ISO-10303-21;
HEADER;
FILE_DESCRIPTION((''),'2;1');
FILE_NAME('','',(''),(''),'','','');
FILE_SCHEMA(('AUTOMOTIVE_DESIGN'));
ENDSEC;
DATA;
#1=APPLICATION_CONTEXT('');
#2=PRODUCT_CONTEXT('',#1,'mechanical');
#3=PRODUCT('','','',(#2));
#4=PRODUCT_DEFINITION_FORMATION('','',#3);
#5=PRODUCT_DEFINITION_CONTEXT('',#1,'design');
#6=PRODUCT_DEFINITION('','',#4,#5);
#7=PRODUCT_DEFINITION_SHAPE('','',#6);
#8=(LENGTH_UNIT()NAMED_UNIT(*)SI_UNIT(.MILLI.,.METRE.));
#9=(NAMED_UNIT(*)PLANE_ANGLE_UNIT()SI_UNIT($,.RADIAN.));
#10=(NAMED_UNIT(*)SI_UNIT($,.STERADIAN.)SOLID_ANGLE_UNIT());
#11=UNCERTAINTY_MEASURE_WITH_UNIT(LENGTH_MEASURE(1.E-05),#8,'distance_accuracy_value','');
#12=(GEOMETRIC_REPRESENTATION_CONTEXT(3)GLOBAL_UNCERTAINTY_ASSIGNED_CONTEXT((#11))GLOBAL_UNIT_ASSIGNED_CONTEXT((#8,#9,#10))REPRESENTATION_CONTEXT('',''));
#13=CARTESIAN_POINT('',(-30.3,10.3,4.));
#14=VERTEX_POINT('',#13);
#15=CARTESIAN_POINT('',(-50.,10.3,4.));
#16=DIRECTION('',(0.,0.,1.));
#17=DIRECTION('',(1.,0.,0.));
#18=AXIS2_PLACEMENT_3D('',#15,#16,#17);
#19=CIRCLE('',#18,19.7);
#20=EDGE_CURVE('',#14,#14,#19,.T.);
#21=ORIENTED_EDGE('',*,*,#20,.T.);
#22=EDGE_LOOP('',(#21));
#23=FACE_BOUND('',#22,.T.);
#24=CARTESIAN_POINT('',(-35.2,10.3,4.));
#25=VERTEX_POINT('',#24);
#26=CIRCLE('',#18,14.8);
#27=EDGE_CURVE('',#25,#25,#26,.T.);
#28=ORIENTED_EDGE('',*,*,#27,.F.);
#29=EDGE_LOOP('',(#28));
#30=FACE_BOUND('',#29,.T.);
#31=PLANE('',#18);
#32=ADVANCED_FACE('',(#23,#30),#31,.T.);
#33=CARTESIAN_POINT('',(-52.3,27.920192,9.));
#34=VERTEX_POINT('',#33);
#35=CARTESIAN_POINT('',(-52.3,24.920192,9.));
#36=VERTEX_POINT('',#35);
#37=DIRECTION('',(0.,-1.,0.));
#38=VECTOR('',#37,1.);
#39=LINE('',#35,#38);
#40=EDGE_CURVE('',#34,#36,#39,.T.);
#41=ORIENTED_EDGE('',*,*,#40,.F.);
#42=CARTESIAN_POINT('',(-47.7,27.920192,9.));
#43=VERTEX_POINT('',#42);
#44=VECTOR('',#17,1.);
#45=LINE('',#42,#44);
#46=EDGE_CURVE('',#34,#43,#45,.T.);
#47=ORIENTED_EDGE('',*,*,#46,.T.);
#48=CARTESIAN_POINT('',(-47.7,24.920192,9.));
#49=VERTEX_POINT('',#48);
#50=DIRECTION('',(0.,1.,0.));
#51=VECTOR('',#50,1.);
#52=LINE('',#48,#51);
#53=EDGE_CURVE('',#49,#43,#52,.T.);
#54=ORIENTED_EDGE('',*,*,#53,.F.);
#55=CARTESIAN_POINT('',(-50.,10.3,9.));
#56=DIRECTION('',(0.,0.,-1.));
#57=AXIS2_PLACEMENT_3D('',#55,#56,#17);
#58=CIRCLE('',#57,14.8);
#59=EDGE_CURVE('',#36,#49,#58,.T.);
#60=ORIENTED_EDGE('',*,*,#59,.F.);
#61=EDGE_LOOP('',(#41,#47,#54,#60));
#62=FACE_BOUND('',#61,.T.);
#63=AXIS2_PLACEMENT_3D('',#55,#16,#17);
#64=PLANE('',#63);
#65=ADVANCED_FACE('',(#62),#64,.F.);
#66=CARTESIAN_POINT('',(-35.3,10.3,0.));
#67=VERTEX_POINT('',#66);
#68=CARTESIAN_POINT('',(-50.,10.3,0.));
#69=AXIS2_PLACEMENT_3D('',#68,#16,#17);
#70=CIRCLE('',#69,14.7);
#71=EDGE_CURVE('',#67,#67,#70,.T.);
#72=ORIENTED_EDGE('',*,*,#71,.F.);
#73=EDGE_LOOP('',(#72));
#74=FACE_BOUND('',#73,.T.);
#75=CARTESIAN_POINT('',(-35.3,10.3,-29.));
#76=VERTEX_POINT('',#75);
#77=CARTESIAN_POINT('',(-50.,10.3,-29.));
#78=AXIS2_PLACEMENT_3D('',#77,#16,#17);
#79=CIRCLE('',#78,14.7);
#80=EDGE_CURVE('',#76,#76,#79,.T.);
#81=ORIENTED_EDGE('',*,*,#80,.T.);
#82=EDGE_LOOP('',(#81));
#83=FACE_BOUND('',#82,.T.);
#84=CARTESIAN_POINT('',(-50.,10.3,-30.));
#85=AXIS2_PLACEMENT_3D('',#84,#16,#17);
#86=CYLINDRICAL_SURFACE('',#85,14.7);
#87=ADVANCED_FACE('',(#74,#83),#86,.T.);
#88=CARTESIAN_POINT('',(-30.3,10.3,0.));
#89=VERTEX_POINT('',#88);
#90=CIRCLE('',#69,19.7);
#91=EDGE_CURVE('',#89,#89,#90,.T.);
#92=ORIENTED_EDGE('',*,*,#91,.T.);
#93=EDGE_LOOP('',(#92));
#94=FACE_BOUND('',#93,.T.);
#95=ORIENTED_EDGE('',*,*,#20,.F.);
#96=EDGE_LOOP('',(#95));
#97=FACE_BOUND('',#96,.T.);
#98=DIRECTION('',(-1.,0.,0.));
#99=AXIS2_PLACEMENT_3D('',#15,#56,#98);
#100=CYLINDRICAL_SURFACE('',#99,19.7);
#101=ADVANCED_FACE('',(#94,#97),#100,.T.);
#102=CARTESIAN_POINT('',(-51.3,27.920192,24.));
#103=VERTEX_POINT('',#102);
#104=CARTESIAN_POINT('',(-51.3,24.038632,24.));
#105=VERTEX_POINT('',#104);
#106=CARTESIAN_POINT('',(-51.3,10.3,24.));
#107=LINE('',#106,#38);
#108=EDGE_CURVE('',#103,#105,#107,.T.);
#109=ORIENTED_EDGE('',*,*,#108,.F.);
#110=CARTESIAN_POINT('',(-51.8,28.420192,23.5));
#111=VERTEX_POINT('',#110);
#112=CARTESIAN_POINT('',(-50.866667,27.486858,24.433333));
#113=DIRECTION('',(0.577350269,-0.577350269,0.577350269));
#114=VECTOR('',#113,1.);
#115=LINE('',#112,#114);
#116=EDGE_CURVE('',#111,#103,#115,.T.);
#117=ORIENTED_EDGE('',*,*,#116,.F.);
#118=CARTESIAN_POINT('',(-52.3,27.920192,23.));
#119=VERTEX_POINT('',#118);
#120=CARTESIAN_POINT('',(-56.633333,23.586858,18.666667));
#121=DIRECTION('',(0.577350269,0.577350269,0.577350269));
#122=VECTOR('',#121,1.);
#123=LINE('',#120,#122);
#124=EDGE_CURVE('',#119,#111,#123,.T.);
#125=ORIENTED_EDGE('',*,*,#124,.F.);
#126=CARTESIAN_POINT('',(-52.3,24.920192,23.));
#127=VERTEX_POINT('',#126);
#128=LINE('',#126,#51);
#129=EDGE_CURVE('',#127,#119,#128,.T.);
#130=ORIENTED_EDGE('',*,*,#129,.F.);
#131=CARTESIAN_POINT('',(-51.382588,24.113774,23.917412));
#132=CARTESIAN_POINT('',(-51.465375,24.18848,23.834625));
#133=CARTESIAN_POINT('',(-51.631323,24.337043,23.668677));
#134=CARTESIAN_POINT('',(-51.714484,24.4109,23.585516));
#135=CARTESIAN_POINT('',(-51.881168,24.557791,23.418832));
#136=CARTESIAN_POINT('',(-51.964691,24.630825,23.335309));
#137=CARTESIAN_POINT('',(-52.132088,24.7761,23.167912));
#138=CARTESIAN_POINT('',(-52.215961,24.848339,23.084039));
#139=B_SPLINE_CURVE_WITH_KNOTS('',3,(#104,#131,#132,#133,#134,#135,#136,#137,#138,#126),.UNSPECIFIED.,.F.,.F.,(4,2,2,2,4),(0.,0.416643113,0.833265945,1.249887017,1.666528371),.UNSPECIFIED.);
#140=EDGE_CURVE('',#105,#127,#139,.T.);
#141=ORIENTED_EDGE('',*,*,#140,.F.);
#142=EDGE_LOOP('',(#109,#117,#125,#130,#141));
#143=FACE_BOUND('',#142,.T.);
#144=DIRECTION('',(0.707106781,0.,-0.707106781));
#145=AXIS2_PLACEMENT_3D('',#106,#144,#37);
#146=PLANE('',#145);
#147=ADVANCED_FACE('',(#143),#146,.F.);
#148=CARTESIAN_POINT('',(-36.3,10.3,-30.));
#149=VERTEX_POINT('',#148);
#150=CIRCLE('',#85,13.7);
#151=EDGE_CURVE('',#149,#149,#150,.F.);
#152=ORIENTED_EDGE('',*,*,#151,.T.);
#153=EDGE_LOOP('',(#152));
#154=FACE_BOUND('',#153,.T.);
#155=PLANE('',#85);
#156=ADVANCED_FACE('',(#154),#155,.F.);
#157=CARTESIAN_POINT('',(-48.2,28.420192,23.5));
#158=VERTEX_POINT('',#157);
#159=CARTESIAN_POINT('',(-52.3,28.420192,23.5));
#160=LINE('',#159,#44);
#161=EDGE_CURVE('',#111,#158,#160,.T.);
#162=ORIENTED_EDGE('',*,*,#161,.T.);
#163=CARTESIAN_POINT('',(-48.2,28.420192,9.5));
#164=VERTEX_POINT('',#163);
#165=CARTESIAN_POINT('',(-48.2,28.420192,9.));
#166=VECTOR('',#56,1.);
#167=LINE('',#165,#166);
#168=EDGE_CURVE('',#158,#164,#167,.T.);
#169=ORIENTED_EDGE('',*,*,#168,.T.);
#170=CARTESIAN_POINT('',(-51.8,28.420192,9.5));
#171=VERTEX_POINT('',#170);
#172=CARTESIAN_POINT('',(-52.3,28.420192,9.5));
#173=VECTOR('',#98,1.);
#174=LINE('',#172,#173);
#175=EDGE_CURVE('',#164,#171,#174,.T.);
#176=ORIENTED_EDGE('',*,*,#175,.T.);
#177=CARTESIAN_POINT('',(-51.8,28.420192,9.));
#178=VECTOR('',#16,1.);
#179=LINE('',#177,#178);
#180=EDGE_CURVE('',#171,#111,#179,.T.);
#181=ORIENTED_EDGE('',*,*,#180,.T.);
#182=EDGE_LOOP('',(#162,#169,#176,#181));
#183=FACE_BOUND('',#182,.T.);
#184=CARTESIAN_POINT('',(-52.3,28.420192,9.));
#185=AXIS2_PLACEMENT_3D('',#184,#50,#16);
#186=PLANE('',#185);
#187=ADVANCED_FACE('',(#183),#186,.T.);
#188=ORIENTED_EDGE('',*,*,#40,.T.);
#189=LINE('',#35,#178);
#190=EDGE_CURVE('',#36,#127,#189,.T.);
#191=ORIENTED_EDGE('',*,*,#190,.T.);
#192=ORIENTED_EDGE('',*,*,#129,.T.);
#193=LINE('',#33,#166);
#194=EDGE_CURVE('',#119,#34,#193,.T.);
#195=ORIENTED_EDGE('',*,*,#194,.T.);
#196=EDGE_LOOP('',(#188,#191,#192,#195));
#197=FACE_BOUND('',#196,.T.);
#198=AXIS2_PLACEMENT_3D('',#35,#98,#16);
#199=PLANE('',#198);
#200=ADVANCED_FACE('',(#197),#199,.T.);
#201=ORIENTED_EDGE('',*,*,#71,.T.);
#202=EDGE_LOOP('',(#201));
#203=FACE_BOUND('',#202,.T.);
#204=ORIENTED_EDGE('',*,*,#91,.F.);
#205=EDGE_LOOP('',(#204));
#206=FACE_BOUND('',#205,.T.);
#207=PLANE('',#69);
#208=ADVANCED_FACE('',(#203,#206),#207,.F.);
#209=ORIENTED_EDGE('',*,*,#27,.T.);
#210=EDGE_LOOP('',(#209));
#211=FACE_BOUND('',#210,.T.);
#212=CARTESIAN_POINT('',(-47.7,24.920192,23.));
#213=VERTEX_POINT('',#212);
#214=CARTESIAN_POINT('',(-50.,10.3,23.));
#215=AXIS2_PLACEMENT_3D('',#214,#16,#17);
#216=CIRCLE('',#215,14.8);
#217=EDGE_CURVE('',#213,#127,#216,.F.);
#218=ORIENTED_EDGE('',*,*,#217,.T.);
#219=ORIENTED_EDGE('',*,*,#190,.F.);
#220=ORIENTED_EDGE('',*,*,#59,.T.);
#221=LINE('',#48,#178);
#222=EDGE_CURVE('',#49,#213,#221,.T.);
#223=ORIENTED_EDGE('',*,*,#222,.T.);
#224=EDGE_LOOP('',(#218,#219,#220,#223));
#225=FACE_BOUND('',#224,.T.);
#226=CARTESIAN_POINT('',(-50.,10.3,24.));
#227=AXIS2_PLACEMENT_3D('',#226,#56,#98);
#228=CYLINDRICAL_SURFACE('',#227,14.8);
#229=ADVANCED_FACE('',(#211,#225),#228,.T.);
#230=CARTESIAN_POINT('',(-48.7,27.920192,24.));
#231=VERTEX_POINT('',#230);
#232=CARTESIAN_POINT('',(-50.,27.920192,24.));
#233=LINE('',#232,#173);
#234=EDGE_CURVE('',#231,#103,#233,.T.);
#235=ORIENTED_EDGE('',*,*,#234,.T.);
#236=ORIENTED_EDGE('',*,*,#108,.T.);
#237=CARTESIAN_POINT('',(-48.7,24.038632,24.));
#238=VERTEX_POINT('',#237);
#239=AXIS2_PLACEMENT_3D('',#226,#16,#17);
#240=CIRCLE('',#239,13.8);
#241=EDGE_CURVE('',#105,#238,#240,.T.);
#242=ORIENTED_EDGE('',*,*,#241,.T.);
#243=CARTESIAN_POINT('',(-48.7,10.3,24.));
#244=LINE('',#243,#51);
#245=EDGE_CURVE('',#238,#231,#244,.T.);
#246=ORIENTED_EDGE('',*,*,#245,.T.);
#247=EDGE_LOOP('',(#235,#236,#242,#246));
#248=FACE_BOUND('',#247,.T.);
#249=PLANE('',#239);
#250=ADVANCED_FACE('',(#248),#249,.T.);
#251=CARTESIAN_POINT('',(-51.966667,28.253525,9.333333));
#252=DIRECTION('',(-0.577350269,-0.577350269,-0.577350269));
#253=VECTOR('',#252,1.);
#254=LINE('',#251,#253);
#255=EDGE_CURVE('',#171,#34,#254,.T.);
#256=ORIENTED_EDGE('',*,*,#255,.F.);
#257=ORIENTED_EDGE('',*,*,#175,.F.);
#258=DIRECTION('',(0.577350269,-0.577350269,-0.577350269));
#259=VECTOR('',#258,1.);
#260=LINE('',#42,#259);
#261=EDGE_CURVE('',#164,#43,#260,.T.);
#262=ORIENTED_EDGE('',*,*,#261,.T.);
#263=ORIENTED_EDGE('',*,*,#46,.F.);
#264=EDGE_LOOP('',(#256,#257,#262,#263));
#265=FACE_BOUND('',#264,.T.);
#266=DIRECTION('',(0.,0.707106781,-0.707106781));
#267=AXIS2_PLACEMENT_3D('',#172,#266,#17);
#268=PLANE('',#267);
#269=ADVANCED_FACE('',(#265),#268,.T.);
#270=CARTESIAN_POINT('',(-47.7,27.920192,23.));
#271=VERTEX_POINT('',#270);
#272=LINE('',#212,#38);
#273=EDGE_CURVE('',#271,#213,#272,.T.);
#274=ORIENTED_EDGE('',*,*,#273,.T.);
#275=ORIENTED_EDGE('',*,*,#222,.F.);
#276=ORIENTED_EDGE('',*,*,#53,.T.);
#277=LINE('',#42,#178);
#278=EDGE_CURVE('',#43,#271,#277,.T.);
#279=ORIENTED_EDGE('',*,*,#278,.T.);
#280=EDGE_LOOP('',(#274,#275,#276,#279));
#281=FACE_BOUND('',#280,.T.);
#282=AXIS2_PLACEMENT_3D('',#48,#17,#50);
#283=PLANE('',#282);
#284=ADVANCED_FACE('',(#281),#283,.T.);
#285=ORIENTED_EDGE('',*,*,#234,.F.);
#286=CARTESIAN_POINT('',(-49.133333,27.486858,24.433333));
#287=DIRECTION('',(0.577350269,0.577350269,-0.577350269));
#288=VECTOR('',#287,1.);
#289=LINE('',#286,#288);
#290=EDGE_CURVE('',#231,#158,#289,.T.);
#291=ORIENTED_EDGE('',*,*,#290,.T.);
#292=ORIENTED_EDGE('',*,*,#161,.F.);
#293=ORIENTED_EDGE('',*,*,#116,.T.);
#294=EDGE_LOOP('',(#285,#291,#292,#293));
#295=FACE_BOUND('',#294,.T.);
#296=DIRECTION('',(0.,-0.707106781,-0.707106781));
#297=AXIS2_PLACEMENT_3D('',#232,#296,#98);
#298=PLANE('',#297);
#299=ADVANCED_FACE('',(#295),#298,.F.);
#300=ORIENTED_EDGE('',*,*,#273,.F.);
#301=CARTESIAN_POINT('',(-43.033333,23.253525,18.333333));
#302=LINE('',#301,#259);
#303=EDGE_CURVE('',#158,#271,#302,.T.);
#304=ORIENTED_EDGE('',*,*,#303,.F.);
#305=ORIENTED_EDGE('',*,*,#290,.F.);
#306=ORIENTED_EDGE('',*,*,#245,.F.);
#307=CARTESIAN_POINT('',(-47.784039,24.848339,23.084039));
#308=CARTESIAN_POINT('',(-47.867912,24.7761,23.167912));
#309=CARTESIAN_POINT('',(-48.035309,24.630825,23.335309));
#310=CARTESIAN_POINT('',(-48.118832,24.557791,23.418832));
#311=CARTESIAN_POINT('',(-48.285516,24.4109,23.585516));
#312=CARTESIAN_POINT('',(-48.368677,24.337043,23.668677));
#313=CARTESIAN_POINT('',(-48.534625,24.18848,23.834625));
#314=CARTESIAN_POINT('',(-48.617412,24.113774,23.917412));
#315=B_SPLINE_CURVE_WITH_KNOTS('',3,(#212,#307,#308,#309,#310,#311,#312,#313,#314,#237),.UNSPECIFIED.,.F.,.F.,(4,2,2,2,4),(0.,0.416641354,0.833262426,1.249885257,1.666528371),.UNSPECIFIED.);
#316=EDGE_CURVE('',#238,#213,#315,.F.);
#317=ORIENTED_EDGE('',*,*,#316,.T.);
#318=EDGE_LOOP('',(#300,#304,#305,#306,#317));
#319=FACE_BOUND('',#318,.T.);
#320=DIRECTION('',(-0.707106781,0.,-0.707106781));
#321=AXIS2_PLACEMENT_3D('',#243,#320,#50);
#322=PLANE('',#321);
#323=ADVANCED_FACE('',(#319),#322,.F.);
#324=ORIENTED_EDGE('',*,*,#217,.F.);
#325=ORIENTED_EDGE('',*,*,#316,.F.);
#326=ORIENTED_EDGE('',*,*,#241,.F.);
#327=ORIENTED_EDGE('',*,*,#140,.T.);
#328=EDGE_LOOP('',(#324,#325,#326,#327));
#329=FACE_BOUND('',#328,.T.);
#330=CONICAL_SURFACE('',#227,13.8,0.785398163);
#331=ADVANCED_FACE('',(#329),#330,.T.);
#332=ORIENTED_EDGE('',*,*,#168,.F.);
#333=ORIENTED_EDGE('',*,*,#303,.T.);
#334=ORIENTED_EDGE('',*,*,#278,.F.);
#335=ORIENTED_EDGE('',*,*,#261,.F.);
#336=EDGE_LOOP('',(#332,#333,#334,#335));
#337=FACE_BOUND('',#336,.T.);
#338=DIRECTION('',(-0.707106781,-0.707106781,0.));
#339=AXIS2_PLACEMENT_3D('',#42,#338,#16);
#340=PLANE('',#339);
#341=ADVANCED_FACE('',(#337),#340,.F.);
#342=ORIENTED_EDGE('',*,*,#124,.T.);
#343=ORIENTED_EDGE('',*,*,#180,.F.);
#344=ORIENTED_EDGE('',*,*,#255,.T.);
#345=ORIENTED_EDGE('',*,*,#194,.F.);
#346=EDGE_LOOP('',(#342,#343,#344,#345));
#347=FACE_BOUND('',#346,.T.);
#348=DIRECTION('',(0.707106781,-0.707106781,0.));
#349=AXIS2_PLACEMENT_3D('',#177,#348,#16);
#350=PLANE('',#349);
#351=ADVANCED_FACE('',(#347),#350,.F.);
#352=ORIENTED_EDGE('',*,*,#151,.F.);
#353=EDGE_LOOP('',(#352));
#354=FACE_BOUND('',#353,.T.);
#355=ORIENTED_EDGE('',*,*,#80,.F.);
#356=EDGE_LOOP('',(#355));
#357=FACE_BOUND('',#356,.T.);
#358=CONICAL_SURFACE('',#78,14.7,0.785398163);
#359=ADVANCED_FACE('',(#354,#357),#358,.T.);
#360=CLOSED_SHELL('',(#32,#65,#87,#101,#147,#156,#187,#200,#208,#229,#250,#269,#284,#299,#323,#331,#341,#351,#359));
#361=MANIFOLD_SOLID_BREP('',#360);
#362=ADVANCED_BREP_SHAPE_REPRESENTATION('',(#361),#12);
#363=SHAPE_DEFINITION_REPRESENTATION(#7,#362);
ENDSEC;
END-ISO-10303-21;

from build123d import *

# Parameters (mm, degrees)
SKETCH1_R           = 14.7
BOSS_EXTRUDE1_DEPTH = 30
SKETCH2_R           = 19.7
BOSS_EXTRUDE2_DEPTH = 4
SKETCH3_R           = 14.8
BOSS_EXTRUDE3_DEPTH = 20
BOSS_EXTRUDE4_START = -15
BOSS_EXTRUDE4_DEPTH = 15
CHAMFER1_SIZE       = 0.5
CHAMFER2_SIZE       = 1


with BuildPart() as part:
    # Sketch1 → Boss-Extrude1 (new body)
    with BuildSketch(Plane.XY):
        with Locations((-50, 10.3)):
            Circle(SKETCH1_R)
    extrude(amount=-BOSS_EXTRUDE1_DEPTH)

    # Sketch2 → Boss-Extrude2 (add)
    with BuildSketch(Plane.XY):
        with Locations((-50, 10.3)):
            Circle(SKETCH2_R)
    extrude(amount=BOSS_EXTRUDE2_DEPTH)

    # Sketch3 → Boss-Extrude3 (add)
    with BuildSketch(Plane.XY.offset(4)):
        with Locations((-50, 10.3)):
            Circle(SKETCH3_R)
    extrude(amount=BOSS_EXTRUDE3_DEPTH)

    # Sketch5 → Boss-Extrude4 (add)
    with BuildSketch(Plane.XY.offset(24).offset(BOSS_EXTRUDE4_START)):
        with BuildLine():
            Line((-52.3, 24.920191517), (-52.3, 28.420191517))
            Line((-52.3, 28.420191517), (-47.7, 28.420191517))
            Line((-47.7, 28.420191517), (-47.7, 24.920191517))
            ThreePointArc((-47.7, 24.920191517), (-50, 25.1), (-52.3, 24.920191517))
        make_face()
    extrude(amount=BOSS_EXTRUDE4_DEPTH)

    # Chamfer1
    chamfer1_edges = [part.edges().sort_by_distance(p)[0] for p in [
        (-50, 28.420191517, 9),
        (-52.3, 28.420191517, 16.5),
        (-47.7, 28.420191517, 16.5),
        (-50, 28.420191517, 24),
    ]]
    chamfer(chamfer1_edges, length=CHAMFER1_SIZE)

    # Chamfer2
    chamfer2_edges = [part.edges().sort_by_distance(p)[0] for p in [
        (-47.7, 26.420191517, 24),
        (-52.3, 26.420191517, 24),
        (-59.617692031, -0.948999956, 24),
        (-64.7, 10.3, -30),
    ]]
    chamfer(chamfer2_edges, length=CHAMFER2_SIZE - 0.0001)  # a hair under: the kernel refuses the full size


solid = part.part
